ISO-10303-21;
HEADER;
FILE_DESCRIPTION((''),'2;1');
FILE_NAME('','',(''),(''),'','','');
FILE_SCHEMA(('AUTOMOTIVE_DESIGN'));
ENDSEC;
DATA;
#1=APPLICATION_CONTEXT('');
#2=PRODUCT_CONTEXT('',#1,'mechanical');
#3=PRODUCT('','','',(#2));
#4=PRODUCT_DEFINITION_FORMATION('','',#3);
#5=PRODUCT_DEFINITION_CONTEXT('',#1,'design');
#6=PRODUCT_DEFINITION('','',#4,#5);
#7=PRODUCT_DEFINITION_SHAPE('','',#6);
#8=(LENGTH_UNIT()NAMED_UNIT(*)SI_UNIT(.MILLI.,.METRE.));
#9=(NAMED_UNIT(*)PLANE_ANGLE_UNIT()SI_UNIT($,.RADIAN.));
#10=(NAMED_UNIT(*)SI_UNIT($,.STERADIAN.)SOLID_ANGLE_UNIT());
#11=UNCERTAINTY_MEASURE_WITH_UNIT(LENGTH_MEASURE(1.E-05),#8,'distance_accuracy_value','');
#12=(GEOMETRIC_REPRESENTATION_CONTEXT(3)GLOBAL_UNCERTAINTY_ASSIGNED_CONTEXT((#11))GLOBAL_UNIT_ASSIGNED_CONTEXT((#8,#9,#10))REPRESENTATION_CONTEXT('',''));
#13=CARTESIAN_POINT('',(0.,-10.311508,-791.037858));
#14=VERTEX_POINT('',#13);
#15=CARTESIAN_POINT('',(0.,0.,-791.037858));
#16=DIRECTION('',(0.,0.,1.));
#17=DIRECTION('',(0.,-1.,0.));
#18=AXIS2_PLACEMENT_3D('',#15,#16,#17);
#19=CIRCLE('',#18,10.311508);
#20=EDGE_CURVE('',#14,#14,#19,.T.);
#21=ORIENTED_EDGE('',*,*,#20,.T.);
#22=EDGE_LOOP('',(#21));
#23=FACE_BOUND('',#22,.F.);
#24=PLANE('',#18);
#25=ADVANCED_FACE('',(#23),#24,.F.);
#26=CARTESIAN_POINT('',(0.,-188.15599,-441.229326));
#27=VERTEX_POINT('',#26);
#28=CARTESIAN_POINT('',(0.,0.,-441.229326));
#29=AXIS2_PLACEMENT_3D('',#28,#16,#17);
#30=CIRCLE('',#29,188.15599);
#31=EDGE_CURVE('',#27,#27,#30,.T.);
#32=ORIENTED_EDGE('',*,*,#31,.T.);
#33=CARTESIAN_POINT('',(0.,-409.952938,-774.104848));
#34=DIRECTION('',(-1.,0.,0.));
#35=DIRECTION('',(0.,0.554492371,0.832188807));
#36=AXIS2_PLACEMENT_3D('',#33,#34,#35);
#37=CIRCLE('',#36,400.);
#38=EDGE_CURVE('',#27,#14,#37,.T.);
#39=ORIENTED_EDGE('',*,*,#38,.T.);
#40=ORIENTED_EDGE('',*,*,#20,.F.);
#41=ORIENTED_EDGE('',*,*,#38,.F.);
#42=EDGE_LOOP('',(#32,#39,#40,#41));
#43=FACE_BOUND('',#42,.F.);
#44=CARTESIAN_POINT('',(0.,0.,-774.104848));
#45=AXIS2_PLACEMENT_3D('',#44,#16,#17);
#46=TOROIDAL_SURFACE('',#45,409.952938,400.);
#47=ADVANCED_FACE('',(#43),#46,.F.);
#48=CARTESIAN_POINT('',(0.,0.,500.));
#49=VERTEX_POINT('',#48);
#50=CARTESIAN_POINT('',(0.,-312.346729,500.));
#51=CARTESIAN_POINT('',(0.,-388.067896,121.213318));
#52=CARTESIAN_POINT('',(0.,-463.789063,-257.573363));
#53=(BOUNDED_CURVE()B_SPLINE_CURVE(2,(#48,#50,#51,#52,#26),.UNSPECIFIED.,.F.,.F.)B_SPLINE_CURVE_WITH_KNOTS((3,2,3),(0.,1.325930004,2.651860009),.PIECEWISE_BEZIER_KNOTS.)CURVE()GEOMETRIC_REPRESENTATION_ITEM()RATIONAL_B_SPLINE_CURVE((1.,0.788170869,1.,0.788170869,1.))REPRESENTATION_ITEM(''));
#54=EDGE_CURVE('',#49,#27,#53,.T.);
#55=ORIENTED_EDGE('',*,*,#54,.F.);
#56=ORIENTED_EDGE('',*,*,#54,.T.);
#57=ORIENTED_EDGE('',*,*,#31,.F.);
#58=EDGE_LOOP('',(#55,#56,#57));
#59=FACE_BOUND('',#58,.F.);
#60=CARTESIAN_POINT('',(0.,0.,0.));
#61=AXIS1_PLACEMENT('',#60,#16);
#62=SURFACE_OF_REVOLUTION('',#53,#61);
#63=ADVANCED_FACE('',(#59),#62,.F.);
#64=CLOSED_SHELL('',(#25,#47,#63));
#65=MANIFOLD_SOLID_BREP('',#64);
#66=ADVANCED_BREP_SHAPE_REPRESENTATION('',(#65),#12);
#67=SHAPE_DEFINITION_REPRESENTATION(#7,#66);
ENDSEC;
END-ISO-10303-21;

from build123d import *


with BuildPart() as f1:
    # F0 (on Right) → F1 (revolve)
    with BuildSketch(Plane.YZ):
        with BuildLine():
            Line((0, -500), (0, 500))
            add(Edge.make_bspline(
                [(0, 500), (-312.3467291674, 500), (-388.0678962691, 121.2133184546), (-463.7890633707, -257.5733630908), (-188.1559899699, -441.2293257169)],
                knots=[0, 0, 0, 1.3259300045, 1.3259300045, 2.651860009, 2.651860009, 2.651860009], degree=2, weights=[1, 0.7881708688, 1, 0.7881708688, 1]))
            ThreePointArc((-188.1559899699, -441.2293257169), (-53.3888950353, -592.8258288238), (-10.3115076199, -791.0378575325))
            Line((-10.3115076199, -791.0378575325), (0, -791.0378575325))
            Line((0, -791.0378575325), (0, -500))
        make_face()
    revolve(axis=Axis((0, 0, 0), (0, 0, 1)))


solid = f1.part
